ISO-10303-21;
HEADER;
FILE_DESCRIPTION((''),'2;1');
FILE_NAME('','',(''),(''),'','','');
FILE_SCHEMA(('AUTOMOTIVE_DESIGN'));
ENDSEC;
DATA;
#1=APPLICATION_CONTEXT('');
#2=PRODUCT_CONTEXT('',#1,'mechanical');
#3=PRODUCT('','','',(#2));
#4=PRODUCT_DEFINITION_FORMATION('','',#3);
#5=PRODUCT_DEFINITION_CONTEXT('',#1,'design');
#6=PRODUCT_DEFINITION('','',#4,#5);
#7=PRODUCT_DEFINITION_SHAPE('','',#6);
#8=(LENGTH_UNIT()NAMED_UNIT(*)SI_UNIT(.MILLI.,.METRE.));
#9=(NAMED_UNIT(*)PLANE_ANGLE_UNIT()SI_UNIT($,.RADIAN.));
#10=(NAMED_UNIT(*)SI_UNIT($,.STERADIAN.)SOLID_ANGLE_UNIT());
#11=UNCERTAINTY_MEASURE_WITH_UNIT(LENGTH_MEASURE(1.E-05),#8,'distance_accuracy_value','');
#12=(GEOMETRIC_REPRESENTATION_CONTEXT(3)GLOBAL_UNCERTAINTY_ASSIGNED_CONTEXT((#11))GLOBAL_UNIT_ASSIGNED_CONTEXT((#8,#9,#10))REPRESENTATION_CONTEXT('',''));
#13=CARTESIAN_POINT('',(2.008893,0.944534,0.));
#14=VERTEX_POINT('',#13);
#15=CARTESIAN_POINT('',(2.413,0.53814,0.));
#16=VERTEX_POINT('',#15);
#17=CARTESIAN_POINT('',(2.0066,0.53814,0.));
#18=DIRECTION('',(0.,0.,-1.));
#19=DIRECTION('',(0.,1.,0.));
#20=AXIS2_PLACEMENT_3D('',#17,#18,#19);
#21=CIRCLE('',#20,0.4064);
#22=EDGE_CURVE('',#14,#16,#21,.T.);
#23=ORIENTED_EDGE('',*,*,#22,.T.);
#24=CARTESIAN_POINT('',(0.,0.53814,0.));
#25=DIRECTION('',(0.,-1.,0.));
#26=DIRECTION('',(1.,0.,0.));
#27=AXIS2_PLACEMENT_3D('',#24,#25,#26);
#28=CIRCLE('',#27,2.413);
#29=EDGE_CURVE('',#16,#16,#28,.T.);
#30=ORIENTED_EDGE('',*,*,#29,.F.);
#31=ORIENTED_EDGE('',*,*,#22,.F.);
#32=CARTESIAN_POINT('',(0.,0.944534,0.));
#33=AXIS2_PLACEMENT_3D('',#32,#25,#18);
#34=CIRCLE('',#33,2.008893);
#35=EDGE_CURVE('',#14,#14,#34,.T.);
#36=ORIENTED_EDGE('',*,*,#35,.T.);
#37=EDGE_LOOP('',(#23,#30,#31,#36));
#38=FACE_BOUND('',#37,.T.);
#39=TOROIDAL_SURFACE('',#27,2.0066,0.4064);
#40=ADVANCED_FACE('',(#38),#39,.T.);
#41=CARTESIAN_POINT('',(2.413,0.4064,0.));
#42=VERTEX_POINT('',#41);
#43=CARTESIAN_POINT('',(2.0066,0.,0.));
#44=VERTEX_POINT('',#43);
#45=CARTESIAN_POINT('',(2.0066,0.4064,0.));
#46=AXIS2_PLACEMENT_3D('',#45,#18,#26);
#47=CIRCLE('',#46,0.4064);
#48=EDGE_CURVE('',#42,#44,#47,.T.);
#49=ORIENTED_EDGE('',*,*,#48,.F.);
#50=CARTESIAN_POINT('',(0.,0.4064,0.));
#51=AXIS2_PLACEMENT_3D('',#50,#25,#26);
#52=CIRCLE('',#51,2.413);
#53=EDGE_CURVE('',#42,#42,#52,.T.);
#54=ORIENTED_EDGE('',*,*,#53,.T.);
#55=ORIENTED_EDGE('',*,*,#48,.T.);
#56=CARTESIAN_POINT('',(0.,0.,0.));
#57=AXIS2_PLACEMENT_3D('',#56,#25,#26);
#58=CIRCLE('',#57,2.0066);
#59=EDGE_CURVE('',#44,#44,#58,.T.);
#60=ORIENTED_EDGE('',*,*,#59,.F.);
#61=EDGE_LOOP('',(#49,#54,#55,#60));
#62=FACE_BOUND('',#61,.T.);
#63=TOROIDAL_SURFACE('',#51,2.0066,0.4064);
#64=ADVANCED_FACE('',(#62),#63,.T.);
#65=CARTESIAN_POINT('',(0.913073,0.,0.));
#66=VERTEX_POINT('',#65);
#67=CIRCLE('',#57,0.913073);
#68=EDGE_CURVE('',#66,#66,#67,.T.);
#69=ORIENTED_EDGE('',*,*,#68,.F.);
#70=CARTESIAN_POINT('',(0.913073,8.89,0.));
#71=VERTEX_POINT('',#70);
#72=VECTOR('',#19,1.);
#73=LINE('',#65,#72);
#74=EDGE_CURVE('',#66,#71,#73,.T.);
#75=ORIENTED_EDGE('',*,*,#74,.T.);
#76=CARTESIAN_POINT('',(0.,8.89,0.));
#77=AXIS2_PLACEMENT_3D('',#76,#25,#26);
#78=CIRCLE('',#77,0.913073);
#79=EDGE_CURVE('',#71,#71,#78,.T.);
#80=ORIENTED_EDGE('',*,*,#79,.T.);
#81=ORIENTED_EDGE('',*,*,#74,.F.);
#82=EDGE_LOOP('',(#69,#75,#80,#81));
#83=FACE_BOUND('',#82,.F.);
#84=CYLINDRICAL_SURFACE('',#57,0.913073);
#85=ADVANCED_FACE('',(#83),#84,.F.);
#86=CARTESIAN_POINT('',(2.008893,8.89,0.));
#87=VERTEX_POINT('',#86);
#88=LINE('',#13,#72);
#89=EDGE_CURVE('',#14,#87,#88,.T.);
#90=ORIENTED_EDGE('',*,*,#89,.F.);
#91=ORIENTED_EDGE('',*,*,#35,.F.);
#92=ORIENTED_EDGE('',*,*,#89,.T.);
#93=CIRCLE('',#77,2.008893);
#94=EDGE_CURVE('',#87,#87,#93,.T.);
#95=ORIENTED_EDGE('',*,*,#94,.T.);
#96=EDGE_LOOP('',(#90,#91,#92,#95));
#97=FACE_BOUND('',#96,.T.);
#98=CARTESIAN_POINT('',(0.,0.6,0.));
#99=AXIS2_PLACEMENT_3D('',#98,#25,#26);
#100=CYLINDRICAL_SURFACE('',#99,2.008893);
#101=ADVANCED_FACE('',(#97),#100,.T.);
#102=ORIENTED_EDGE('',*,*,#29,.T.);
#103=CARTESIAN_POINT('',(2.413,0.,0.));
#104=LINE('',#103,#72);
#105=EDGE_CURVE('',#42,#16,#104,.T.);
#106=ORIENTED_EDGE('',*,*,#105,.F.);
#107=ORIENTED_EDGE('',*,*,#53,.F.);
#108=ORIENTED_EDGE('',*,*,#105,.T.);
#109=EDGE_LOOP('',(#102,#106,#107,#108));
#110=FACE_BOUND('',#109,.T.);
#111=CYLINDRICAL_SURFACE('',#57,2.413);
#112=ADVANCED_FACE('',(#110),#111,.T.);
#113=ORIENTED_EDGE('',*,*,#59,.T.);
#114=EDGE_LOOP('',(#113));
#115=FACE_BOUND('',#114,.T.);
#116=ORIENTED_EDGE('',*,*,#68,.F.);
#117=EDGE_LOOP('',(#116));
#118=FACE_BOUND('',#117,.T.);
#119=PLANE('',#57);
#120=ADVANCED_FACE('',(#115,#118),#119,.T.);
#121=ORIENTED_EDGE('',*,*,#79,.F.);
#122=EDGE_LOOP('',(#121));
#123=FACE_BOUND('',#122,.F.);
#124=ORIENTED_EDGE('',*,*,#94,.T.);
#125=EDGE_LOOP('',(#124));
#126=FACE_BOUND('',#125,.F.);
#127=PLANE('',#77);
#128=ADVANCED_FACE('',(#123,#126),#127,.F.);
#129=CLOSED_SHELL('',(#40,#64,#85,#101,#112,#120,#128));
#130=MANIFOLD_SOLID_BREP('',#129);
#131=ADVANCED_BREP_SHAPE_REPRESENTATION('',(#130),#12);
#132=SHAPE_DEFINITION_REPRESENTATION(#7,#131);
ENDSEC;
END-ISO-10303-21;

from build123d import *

# Parameters (mm, degrees)
F0_R        = 2.0088927205
F0_R_2      = 0.9130728347
F1_DEPTH    = 8.89
F0_R_3      = 2.413
F2_DEPTH    = 0.94454
F3_S5_R     = 2.0088927205
F3_T6_DEPTH = 5


# Not quite as in the source:
# - a fillet or chamfer that OpenCascade refuses, or shapes differently, is made with other operations: its cross-section is extruded or revolved along the edge and cut away or added


with BuildPart() as f1:
    # F0 (on Front) → F1 (new body)
    with BuildSketch(Plane.XZ):
        Circle(F0_R)
        Circle(F0_R_2, mode=Mode.SUBTRACT)
    extrude(amount=-F1_DEPTH)

    # F0 (on Front) → F2 (join)
    with BuildSketch(Plane.XZ):
        Circle(F0_R_3)
        Circle(F0_R, mode=Mode.SUBTRACT)
    extrude(amount=-F2_DEPTH)

    # F3: fillet of radius 0.4064 on 2 edges, made by hand


with BuildPart() as f3_tool2:
    # F3_s3 → F3_t4 (revolve)
    with BuildSketch(Plane.XY):
        with BuildLine():
            ThreePointArc((2.0066, 0.94454), (2.2939681959, 0.8255081959), (2.413, 0.53814))
            Line((2.413, 0.53814), (2.413, 0.94454))
            Line((2.413, 0.94454), (2.0066, 0.94454))
        make_face()
    revolve(axis=Axis((0, 0.94454, 0), (0, -1, 0)))

    # F3_s5 → F3_t6 (cut, symmetric)
    with BuildSketch(Plane.XZ.offset(-0.6)):
        Circle(F3_S5_R)
    extrude(amount=F3_T6_DEPTH, both=True, mode=Mode.SUBTRACT)


with BuildPart() as f1_1:
    add(f1.part)

    # F3_t1: cut F3_tool2
    add(f3_tool2.part, mode=Mode.SUBTRACT)

    # F3_s7 → F3_t8 (revolve, cut)
    with BuildSketch(Plane.XY):
        with BuildLine():
            ThreePointArc((2.413, 0.4064), (2.2939681959, 0.1190318041), (2.0066, 0))
            Line((2.0066, 0), (2.413, 0))
            Line((2.413, 0), (2.413, 0.4064))
        make_face()
    revolve(axis=Axis((0, 0, 0), (0, -1, 0)), mode=Mode.SUBTRACT)


solid = f1_1.part
